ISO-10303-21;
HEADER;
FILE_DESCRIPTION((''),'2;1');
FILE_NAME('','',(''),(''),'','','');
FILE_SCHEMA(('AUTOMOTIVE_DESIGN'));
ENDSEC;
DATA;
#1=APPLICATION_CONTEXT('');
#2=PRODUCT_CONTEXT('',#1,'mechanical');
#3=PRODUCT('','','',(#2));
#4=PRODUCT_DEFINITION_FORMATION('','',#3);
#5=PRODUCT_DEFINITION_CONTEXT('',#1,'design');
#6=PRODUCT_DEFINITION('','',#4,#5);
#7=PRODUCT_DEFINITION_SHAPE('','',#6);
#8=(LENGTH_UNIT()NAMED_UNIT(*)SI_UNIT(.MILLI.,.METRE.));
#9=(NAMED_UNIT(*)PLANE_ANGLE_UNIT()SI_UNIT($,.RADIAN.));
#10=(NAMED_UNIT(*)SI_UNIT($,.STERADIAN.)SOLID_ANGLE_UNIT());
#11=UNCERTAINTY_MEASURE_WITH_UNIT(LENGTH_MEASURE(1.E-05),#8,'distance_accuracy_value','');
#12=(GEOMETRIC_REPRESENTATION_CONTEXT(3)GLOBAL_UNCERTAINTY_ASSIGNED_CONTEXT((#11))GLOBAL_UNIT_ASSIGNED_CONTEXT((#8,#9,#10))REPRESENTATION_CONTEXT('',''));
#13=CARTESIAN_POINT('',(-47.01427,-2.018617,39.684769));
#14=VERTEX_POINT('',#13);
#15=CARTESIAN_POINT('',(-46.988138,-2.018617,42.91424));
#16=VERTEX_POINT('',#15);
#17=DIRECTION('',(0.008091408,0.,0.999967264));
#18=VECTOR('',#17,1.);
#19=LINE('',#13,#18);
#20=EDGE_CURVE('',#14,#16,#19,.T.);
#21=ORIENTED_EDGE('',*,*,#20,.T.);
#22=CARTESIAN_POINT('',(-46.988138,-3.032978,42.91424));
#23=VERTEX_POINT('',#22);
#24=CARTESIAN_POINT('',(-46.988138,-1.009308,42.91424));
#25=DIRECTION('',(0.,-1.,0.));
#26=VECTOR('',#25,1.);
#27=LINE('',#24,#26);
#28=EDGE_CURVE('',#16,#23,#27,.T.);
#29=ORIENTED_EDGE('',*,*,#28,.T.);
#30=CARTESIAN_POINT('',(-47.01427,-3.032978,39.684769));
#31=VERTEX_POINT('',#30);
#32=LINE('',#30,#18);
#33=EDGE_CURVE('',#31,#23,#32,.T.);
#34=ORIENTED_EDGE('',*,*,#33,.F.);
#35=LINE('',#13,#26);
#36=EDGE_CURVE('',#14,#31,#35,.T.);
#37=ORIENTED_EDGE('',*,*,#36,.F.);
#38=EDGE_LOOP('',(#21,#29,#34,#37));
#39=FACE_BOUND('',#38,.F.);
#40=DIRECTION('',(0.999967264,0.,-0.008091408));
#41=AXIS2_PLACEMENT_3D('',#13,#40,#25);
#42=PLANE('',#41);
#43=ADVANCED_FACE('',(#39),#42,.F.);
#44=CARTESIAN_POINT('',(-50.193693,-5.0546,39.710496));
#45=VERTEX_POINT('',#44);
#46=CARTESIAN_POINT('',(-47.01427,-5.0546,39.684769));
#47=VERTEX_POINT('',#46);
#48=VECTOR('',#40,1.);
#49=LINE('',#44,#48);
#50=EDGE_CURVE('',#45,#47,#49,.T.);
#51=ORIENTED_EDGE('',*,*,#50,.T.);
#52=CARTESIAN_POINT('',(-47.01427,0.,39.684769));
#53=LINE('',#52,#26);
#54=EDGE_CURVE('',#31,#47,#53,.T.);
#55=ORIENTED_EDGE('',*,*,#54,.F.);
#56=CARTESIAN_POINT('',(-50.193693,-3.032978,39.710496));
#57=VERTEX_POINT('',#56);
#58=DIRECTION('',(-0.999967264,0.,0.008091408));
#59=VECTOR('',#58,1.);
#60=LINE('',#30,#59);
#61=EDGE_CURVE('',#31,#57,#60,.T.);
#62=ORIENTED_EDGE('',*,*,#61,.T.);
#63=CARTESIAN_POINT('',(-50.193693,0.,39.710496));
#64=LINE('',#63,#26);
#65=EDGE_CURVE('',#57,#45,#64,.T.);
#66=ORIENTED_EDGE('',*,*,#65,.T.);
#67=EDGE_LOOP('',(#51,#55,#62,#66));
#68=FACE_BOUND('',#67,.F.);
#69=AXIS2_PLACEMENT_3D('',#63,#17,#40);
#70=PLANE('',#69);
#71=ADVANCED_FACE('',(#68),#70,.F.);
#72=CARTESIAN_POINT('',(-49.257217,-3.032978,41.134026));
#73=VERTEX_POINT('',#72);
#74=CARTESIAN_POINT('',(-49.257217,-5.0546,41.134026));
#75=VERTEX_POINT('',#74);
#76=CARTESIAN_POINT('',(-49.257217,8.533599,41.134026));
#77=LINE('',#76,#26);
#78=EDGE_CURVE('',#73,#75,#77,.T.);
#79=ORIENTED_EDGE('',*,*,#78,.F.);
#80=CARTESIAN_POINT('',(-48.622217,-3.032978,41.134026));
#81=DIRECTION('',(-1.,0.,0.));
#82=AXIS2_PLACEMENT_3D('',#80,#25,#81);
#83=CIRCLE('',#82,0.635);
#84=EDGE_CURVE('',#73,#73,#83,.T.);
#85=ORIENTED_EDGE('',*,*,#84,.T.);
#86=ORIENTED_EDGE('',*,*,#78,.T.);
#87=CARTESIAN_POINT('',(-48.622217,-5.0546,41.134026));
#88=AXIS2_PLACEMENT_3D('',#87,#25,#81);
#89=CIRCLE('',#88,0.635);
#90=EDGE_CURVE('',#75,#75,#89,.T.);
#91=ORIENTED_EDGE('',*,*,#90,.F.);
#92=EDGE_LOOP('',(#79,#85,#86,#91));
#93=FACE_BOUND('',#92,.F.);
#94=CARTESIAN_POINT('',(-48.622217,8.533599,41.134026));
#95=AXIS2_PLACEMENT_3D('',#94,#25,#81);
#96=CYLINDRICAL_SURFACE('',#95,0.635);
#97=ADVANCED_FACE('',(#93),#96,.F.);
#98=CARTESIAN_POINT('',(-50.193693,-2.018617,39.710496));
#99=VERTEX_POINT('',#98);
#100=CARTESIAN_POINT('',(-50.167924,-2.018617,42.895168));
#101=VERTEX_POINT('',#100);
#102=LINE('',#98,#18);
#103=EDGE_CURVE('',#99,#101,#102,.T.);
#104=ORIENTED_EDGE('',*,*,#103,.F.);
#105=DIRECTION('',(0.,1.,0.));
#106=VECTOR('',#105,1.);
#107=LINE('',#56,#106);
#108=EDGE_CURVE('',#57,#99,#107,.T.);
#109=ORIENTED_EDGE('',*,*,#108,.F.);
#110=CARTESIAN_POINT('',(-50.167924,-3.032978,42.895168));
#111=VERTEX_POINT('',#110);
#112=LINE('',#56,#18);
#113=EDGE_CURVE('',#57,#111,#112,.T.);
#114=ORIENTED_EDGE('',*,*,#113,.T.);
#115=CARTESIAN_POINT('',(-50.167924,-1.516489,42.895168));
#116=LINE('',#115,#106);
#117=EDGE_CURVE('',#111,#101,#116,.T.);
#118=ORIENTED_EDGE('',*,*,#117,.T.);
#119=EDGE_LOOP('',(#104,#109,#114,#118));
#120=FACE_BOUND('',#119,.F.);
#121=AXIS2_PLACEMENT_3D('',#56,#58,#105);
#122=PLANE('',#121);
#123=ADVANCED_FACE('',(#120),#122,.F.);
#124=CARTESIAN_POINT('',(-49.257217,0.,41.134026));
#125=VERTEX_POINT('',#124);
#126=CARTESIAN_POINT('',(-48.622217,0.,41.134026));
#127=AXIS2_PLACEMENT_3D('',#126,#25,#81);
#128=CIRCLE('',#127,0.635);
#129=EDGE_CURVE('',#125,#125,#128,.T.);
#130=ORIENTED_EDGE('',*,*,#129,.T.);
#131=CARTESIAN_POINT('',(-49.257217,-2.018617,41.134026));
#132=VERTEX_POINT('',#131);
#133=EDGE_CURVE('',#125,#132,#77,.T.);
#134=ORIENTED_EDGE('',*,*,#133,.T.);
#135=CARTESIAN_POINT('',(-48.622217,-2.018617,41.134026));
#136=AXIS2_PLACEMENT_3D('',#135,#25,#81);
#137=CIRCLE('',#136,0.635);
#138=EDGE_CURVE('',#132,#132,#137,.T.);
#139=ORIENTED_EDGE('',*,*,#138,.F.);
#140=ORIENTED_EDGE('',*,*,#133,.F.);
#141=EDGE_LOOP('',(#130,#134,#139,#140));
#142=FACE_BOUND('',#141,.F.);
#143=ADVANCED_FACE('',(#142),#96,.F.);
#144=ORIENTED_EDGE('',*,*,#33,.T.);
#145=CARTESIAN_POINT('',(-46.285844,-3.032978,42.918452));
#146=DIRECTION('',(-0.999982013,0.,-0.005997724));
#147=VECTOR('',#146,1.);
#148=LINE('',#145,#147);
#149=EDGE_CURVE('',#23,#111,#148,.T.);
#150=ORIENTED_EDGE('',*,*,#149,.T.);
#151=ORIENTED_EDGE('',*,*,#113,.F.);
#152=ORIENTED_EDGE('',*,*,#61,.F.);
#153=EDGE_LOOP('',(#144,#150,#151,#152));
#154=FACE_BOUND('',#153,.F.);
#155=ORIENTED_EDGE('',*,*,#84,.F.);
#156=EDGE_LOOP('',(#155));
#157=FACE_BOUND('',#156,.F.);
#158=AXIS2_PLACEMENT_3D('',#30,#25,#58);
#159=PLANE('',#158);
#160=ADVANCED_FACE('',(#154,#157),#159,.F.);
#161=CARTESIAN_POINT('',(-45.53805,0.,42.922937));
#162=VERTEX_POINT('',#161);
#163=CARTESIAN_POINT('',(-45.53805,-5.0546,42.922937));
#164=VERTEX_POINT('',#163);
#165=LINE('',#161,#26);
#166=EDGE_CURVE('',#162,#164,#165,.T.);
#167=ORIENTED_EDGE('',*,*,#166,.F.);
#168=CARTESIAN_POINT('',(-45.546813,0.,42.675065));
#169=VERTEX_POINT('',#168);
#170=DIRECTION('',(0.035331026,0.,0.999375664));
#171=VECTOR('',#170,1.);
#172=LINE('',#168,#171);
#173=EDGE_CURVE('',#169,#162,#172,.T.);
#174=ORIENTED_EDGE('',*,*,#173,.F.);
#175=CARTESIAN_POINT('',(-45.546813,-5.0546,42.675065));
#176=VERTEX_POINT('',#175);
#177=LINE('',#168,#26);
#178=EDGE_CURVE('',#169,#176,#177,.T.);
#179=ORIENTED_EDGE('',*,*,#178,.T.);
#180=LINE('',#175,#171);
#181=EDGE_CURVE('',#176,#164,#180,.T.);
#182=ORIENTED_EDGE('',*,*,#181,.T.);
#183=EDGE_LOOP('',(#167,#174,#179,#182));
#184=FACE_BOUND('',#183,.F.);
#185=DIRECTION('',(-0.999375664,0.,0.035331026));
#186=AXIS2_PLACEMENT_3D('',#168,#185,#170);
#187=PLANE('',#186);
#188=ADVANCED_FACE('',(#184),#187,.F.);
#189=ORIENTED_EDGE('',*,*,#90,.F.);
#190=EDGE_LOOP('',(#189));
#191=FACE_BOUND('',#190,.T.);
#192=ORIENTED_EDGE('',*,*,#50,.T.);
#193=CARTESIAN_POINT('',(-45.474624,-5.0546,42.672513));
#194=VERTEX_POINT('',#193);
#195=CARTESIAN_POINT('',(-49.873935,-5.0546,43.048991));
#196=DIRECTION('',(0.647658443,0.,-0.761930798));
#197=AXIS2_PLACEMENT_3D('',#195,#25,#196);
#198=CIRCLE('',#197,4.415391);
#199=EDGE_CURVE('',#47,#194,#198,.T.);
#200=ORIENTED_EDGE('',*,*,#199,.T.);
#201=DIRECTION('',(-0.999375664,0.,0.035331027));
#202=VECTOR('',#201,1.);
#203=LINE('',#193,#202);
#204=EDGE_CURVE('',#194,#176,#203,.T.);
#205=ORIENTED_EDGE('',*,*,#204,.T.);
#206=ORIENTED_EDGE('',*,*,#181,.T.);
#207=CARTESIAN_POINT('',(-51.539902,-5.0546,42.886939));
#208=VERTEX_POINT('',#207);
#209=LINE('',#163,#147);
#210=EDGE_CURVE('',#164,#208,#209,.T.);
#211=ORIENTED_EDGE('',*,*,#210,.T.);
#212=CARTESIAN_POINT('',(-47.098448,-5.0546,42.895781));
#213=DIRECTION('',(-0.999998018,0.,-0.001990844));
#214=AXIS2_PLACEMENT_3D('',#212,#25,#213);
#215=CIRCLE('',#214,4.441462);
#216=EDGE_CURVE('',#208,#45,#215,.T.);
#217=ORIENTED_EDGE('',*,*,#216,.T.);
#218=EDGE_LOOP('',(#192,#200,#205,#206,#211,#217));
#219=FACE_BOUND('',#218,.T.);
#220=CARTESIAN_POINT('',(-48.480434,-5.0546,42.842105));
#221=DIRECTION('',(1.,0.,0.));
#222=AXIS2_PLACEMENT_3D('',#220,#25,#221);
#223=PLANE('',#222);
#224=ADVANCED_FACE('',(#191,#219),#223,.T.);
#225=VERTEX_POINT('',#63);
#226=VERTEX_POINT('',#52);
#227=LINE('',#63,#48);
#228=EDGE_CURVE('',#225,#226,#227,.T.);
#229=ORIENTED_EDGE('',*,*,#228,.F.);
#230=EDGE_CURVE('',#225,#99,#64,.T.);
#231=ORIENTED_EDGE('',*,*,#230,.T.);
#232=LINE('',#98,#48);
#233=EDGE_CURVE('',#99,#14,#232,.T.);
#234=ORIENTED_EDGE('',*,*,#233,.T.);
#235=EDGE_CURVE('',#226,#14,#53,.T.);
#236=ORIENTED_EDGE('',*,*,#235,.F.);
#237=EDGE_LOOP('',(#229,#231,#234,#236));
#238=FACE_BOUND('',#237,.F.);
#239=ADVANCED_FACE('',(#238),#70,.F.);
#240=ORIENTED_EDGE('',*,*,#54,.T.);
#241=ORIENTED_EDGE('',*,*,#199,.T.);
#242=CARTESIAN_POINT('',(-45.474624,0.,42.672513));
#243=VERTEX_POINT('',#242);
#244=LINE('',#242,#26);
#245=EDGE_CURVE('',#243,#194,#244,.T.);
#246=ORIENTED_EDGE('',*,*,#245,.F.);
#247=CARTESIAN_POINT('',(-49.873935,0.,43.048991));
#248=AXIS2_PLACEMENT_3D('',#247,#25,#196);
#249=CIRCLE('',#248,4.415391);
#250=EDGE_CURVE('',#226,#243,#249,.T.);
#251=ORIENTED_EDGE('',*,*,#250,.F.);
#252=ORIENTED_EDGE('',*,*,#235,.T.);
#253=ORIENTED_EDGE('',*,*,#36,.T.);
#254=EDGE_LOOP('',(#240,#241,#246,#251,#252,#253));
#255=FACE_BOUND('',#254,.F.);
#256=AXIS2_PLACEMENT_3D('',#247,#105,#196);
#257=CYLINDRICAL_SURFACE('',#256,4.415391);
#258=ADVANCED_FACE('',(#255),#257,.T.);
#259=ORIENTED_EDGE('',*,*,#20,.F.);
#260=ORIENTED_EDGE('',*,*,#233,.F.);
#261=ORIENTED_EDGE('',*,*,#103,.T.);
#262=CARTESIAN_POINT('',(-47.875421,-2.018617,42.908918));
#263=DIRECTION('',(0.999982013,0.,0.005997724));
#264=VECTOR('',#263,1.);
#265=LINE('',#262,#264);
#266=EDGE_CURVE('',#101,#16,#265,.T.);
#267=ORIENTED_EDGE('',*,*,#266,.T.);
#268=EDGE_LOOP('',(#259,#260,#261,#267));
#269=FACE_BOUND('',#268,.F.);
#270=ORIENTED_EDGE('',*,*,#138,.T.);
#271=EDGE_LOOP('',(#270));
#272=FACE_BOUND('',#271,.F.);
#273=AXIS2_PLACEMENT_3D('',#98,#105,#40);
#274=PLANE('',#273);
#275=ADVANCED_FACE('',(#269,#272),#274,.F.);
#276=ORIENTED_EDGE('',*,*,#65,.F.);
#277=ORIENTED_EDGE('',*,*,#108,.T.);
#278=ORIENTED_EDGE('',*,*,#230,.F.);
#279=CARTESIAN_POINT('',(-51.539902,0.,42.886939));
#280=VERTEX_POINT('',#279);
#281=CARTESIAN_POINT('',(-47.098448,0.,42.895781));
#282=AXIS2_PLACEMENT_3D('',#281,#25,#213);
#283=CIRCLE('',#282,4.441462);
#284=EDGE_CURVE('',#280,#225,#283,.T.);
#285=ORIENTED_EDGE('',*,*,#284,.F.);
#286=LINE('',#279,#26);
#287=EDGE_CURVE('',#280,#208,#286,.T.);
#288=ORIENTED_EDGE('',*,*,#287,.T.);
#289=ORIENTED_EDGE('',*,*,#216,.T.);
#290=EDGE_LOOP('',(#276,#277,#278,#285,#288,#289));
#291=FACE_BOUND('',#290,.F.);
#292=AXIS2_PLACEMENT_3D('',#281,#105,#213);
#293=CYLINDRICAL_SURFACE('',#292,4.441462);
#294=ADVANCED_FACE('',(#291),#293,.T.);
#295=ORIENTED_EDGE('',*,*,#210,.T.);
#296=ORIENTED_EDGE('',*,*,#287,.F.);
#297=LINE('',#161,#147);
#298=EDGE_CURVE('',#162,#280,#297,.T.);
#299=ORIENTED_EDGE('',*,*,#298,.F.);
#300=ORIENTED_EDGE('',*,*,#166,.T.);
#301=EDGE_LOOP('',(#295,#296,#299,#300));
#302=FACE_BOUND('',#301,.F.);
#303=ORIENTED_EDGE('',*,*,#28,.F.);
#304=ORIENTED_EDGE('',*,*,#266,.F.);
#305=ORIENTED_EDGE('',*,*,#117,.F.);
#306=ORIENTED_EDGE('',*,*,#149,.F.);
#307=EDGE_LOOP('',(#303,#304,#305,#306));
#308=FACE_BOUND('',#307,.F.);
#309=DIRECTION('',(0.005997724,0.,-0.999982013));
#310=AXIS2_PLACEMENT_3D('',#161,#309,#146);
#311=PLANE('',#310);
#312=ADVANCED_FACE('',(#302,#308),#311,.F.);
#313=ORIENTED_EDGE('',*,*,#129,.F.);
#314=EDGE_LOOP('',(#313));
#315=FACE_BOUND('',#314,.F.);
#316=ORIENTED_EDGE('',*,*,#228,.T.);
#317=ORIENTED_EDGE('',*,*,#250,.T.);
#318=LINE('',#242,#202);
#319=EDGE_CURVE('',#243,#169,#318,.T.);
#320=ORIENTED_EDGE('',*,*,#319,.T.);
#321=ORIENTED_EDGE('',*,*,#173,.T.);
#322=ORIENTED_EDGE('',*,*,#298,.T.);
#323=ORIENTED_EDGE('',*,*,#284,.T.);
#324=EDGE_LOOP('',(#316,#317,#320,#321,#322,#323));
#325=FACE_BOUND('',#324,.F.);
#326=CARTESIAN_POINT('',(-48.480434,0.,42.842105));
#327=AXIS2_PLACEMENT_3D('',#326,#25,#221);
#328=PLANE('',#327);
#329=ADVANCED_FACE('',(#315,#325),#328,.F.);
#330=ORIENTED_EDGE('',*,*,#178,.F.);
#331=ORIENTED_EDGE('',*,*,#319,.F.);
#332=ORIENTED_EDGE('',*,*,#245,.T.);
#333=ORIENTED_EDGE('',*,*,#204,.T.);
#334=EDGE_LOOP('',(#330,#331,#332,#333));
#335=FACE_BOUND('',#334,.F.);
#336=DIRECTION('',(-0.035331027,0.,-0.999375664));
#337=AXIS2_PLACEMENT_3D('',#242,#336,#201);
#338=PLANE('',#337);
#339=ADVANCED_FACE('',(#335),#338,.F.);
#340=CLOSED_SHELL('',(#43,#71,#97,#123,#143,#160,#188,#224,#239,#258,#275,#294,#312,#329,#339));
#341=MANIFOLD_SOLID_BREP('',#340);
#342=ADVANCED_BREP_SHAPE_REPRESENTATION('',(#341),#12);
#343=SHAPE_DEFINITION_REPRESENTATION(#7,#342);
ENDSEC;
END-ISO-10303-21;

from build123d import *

# Parameters (mm, degrees)
F1_DEPTH = 5.0546
F2_D     = 1.27
F4_DEPTH = 25.4


# Not quite as in the source:
# - a feature names something its author has since deleted; it is built from what else it names


with BuildPart() as f1:
    # F0 (on Front) → F1 (new body)
    with BuildSketch(Plane.XZ):
        Polygon((-45.5380498264, 42.9229369958), (-51.539901644, 42.8869388998), (-45.5468128822, 42.675064641), align=None)
        with BuildLine():
            Line((-45.5468128822, 42.675064641), (-51.539901644, 42.8869388998))
            ThreePointArc((-51.539901644, 42.8869388998), (-51.187813042, 41.162667719), (-50.1936934888, 39.710495621))
            Line((-50.1936934888, 39.710495621), (-47.0142699778, 39.6847687662))
            ThreePointArc((-47.0142699778, 39.6847687662), (-45.9490353675, 41.0264089842), (-45.474623776, 42.6725125324))
            Line((-45.474623776, 42.6725125324), (-45.5468128822, 42.675064641))
        make_face()
    extrude(amount=F1_DEPTH)

    # F2 (through all)
    with Locations(Plane(origin=(0, 0, 0), x_dir=(1, 0, 0), z_dir=(0, 1, 0))):
        with Locations((-48.6222168853, -41.1340259016)):
            Hole(F2_D / 2)

    # F3 (on face) → F4 (cut)
    with BuildSketch(Plane(origin=(0.3180170752, 0, 39.3017713856), x_dir=(0.999967264, 0, -0.0080914079), z_dir=(-0.0080914079, 0, -0.999967264))):
        Polygon((-50.5133641684, 2.0186165348), (-48.9236003704, 2.0186165348), (-47.3338365724, 2.0186165348), (-47.3338365724, 3.0329779256), (-50.5133641684, 3.0329779256), align=None)
    extrude(amount=-F4_DEPTH, mode=Mode.SUBTRACT)


solid = f1.part
